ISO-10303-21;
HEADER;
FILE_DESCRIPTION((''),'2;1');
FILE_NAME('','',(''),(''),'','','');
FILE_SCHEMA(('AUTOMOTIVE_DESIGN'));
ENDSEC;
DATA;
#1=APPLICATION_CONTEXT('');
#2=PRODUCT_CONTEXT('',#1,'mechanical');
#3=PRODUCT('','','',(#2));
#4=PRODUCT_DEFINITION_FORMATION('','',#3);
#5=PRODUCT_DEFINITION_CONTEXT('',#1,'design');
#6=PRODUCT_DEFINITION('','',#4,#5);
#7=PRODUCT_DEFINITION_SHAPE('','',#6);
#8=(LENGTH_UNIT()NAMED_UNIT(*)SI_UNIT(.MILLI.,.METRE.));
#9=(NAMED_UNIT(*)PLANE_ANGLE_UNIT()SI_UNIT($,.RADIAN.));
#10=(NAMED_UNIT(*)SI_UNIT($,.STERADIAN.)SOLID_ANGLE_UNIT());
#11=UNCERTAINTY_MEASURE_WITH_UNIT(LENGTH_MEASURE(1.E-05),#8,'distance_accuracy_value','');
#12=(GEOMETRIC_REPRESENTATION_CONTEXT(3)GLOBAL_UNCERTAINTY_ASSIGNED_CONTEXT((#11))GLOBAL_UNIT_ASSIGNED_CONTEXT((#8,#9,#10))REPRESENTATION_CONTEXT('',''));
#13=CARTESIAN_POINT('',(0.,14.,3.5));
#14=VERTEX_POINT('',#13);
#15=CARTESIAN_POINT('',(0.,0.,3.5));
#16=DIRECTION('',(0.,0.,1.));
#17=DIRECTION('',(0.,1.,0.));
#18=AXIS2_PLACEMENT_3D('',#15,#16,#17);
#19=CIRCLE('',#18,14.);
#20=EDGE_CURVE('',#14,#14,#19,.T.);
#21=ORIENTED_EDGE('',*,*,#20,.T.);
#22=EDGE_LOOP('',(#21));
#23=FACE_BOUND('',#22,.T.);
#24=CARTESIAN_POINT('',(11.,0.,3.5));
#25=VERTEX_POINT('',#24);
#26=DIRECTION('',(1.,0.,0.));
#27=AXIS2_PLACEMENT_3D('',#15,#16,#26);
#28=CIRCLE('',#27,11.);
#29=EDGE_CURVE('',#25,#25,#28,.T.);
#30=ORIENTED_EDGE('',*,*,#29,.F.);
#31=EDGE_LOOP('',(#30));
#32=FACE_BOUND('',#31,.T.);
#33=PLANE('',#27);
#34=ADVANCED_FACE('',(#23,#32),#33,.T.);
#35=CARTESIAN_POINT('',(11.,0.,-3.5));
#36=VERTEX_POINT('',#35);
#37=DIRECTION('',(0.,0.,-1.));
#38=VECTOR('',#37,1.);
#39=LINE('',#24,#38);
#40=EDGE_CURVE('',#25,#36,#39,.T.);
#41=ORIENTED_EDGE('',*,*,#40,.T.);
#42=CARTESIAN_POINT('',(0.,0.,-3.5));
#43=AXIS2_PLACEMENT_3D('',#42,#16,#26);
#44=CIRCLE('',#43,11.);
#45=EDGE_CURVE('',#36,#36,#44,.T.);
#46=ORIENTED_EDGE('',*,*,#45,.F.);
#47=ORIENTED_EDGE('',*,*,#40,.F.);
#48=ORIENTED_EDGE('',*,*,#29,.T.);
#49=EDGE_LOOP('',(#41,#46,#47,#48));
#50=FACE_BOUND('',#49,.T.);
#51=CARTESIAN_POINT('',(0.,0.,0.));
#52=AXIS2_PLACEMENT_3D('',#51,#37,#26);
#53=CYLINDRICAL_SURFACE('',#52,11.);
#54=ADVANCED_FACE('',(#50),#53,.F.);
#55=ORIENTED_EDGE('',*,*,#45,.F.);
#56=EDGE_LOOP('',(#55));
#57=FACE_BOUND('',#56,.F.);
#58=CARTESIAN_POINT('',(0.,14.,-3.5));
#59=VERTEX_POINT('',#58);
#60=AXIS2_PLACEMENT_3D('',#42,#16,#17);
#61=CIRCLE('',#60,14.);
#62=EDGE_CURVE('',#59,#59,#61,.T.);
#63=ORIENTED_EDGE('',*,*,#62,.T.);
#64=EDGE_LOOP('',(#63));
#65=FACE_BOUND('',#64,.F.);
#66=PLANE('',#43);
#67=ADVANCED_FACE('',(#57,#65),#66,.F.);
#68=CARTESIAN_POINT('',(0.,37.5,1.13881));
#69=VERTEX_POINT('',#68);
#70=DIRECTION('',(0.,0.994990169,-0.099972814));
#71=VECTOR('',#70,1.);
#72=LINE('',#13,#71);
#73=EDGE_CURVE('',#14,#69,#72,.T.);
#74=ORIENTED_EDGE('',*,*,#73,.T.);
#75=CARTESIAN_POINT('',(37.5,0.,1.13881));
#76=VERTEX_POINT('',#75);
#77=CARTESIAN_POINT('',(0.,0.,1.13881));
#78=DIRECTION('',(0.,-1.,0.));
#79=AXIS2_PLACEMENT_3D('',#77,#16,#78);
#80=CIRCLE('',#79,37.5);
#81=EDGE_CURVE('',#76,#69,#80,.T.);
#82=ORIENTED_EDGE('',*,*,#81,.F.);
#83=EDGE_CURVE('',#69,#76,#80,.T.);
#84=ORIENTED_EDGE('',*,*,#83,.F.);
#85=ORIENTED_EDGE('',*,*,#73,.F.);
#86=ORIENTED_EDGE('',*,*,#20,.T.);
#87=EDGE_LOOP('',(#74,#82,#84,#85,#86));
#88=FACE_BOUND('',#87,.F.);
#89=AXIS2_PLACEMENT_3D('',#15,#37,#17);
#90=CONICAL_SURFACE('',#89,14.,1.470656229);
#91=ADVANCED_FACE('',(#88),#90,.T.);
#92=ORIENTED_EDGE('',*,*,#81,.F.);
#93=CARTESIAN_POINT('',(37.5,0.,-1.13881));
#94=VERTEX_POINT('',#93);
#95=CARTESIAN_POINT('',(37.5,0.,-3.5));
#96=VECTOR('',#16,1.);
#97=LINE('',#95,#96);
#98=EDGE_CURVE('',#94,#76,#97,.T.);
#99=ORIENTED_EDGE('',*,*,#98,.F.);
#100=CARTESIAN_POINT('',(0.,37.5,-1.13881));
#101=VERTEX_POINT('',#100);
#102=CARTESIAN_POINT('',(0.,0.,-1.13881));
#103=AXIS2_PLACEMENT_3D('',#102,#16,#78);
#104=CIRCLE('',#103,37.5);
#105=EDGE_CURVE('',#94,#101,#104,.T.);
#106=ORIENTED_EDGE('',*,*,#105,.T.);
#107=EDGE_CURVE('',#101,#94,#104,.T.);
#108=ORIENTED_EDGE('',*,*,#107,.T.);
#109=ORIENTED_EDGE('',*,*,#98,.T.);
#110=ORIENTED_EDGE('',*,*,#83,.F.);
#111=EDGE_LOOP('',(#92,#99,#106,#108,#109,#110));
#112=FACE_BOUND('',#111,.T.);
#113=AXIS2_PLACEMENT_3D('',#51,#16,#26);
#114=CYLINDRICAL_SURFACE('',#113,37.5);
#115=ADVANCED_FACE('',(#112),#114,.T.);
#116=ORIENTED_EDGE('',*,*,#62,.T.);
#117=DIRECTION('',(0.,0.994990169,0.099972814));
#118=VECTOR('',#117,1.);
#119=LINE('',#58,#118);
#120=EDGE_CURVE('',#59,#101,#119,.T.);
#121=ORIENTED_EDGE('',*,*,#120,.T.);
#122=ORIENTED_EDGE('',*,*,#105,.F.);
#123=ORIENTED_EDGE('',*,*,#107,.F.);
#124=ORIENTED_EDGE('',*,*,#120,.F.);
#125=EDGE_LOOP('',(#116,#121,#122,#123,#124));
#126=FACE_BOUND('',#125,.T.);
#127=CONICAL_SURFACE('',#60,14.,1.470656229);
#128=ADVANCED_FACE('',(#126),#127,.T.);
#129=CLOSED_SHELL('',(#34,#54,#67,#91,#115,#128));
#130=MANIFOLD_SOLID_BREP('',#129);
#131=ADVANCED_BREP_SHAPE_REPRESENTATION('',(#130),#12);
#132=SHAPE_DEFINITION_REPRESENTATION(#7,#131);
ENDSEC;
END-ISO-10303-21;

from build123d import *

# Parameters (mm, degrees)
F0_R     = 37.5
F0_R_2   = 11
F1_DEPTH = 3.5


# Not quite as in the source:
# - a pattern or mirror of a feature is missing from the dataset's text; its kind, count and spacing are read off the source's solid


with BuildPart() as f1:
    # F0 (on Top) → F1 (new body, symmetric)
    with BuildSketch(Plane.XY):
        Circle(F0_R)
        Circle(F0_R_2, mode=Mode.SUBTRACT)
    extrude(amount=F1_DEPTH, both=True)

    # F2 (on Right) → F3 (revolve, cut)
    with BuildSketch(Plane.YZ):
        Polygon((43.8578222282, 0.5), (43.8578222282, 0), (53.1842447817, 0), (53.1842447817, 16.8883297592), (14, 16.8883297592), (14, 3.5), align=None)
    f3 = revolve(axis=Axis((0, 0, 12.1004180983), (0, 0, 1)), mode=Mode.SUBTRACT)

    # F3_copies: F3 across plane
    add(f3.mirror(Plane(origin=(0, 0, 0), x_dir=(-1, 0, 0), z_dir=(0, 0, -1))), mode=Mode.SUBTRACT)


solid = f1.part
